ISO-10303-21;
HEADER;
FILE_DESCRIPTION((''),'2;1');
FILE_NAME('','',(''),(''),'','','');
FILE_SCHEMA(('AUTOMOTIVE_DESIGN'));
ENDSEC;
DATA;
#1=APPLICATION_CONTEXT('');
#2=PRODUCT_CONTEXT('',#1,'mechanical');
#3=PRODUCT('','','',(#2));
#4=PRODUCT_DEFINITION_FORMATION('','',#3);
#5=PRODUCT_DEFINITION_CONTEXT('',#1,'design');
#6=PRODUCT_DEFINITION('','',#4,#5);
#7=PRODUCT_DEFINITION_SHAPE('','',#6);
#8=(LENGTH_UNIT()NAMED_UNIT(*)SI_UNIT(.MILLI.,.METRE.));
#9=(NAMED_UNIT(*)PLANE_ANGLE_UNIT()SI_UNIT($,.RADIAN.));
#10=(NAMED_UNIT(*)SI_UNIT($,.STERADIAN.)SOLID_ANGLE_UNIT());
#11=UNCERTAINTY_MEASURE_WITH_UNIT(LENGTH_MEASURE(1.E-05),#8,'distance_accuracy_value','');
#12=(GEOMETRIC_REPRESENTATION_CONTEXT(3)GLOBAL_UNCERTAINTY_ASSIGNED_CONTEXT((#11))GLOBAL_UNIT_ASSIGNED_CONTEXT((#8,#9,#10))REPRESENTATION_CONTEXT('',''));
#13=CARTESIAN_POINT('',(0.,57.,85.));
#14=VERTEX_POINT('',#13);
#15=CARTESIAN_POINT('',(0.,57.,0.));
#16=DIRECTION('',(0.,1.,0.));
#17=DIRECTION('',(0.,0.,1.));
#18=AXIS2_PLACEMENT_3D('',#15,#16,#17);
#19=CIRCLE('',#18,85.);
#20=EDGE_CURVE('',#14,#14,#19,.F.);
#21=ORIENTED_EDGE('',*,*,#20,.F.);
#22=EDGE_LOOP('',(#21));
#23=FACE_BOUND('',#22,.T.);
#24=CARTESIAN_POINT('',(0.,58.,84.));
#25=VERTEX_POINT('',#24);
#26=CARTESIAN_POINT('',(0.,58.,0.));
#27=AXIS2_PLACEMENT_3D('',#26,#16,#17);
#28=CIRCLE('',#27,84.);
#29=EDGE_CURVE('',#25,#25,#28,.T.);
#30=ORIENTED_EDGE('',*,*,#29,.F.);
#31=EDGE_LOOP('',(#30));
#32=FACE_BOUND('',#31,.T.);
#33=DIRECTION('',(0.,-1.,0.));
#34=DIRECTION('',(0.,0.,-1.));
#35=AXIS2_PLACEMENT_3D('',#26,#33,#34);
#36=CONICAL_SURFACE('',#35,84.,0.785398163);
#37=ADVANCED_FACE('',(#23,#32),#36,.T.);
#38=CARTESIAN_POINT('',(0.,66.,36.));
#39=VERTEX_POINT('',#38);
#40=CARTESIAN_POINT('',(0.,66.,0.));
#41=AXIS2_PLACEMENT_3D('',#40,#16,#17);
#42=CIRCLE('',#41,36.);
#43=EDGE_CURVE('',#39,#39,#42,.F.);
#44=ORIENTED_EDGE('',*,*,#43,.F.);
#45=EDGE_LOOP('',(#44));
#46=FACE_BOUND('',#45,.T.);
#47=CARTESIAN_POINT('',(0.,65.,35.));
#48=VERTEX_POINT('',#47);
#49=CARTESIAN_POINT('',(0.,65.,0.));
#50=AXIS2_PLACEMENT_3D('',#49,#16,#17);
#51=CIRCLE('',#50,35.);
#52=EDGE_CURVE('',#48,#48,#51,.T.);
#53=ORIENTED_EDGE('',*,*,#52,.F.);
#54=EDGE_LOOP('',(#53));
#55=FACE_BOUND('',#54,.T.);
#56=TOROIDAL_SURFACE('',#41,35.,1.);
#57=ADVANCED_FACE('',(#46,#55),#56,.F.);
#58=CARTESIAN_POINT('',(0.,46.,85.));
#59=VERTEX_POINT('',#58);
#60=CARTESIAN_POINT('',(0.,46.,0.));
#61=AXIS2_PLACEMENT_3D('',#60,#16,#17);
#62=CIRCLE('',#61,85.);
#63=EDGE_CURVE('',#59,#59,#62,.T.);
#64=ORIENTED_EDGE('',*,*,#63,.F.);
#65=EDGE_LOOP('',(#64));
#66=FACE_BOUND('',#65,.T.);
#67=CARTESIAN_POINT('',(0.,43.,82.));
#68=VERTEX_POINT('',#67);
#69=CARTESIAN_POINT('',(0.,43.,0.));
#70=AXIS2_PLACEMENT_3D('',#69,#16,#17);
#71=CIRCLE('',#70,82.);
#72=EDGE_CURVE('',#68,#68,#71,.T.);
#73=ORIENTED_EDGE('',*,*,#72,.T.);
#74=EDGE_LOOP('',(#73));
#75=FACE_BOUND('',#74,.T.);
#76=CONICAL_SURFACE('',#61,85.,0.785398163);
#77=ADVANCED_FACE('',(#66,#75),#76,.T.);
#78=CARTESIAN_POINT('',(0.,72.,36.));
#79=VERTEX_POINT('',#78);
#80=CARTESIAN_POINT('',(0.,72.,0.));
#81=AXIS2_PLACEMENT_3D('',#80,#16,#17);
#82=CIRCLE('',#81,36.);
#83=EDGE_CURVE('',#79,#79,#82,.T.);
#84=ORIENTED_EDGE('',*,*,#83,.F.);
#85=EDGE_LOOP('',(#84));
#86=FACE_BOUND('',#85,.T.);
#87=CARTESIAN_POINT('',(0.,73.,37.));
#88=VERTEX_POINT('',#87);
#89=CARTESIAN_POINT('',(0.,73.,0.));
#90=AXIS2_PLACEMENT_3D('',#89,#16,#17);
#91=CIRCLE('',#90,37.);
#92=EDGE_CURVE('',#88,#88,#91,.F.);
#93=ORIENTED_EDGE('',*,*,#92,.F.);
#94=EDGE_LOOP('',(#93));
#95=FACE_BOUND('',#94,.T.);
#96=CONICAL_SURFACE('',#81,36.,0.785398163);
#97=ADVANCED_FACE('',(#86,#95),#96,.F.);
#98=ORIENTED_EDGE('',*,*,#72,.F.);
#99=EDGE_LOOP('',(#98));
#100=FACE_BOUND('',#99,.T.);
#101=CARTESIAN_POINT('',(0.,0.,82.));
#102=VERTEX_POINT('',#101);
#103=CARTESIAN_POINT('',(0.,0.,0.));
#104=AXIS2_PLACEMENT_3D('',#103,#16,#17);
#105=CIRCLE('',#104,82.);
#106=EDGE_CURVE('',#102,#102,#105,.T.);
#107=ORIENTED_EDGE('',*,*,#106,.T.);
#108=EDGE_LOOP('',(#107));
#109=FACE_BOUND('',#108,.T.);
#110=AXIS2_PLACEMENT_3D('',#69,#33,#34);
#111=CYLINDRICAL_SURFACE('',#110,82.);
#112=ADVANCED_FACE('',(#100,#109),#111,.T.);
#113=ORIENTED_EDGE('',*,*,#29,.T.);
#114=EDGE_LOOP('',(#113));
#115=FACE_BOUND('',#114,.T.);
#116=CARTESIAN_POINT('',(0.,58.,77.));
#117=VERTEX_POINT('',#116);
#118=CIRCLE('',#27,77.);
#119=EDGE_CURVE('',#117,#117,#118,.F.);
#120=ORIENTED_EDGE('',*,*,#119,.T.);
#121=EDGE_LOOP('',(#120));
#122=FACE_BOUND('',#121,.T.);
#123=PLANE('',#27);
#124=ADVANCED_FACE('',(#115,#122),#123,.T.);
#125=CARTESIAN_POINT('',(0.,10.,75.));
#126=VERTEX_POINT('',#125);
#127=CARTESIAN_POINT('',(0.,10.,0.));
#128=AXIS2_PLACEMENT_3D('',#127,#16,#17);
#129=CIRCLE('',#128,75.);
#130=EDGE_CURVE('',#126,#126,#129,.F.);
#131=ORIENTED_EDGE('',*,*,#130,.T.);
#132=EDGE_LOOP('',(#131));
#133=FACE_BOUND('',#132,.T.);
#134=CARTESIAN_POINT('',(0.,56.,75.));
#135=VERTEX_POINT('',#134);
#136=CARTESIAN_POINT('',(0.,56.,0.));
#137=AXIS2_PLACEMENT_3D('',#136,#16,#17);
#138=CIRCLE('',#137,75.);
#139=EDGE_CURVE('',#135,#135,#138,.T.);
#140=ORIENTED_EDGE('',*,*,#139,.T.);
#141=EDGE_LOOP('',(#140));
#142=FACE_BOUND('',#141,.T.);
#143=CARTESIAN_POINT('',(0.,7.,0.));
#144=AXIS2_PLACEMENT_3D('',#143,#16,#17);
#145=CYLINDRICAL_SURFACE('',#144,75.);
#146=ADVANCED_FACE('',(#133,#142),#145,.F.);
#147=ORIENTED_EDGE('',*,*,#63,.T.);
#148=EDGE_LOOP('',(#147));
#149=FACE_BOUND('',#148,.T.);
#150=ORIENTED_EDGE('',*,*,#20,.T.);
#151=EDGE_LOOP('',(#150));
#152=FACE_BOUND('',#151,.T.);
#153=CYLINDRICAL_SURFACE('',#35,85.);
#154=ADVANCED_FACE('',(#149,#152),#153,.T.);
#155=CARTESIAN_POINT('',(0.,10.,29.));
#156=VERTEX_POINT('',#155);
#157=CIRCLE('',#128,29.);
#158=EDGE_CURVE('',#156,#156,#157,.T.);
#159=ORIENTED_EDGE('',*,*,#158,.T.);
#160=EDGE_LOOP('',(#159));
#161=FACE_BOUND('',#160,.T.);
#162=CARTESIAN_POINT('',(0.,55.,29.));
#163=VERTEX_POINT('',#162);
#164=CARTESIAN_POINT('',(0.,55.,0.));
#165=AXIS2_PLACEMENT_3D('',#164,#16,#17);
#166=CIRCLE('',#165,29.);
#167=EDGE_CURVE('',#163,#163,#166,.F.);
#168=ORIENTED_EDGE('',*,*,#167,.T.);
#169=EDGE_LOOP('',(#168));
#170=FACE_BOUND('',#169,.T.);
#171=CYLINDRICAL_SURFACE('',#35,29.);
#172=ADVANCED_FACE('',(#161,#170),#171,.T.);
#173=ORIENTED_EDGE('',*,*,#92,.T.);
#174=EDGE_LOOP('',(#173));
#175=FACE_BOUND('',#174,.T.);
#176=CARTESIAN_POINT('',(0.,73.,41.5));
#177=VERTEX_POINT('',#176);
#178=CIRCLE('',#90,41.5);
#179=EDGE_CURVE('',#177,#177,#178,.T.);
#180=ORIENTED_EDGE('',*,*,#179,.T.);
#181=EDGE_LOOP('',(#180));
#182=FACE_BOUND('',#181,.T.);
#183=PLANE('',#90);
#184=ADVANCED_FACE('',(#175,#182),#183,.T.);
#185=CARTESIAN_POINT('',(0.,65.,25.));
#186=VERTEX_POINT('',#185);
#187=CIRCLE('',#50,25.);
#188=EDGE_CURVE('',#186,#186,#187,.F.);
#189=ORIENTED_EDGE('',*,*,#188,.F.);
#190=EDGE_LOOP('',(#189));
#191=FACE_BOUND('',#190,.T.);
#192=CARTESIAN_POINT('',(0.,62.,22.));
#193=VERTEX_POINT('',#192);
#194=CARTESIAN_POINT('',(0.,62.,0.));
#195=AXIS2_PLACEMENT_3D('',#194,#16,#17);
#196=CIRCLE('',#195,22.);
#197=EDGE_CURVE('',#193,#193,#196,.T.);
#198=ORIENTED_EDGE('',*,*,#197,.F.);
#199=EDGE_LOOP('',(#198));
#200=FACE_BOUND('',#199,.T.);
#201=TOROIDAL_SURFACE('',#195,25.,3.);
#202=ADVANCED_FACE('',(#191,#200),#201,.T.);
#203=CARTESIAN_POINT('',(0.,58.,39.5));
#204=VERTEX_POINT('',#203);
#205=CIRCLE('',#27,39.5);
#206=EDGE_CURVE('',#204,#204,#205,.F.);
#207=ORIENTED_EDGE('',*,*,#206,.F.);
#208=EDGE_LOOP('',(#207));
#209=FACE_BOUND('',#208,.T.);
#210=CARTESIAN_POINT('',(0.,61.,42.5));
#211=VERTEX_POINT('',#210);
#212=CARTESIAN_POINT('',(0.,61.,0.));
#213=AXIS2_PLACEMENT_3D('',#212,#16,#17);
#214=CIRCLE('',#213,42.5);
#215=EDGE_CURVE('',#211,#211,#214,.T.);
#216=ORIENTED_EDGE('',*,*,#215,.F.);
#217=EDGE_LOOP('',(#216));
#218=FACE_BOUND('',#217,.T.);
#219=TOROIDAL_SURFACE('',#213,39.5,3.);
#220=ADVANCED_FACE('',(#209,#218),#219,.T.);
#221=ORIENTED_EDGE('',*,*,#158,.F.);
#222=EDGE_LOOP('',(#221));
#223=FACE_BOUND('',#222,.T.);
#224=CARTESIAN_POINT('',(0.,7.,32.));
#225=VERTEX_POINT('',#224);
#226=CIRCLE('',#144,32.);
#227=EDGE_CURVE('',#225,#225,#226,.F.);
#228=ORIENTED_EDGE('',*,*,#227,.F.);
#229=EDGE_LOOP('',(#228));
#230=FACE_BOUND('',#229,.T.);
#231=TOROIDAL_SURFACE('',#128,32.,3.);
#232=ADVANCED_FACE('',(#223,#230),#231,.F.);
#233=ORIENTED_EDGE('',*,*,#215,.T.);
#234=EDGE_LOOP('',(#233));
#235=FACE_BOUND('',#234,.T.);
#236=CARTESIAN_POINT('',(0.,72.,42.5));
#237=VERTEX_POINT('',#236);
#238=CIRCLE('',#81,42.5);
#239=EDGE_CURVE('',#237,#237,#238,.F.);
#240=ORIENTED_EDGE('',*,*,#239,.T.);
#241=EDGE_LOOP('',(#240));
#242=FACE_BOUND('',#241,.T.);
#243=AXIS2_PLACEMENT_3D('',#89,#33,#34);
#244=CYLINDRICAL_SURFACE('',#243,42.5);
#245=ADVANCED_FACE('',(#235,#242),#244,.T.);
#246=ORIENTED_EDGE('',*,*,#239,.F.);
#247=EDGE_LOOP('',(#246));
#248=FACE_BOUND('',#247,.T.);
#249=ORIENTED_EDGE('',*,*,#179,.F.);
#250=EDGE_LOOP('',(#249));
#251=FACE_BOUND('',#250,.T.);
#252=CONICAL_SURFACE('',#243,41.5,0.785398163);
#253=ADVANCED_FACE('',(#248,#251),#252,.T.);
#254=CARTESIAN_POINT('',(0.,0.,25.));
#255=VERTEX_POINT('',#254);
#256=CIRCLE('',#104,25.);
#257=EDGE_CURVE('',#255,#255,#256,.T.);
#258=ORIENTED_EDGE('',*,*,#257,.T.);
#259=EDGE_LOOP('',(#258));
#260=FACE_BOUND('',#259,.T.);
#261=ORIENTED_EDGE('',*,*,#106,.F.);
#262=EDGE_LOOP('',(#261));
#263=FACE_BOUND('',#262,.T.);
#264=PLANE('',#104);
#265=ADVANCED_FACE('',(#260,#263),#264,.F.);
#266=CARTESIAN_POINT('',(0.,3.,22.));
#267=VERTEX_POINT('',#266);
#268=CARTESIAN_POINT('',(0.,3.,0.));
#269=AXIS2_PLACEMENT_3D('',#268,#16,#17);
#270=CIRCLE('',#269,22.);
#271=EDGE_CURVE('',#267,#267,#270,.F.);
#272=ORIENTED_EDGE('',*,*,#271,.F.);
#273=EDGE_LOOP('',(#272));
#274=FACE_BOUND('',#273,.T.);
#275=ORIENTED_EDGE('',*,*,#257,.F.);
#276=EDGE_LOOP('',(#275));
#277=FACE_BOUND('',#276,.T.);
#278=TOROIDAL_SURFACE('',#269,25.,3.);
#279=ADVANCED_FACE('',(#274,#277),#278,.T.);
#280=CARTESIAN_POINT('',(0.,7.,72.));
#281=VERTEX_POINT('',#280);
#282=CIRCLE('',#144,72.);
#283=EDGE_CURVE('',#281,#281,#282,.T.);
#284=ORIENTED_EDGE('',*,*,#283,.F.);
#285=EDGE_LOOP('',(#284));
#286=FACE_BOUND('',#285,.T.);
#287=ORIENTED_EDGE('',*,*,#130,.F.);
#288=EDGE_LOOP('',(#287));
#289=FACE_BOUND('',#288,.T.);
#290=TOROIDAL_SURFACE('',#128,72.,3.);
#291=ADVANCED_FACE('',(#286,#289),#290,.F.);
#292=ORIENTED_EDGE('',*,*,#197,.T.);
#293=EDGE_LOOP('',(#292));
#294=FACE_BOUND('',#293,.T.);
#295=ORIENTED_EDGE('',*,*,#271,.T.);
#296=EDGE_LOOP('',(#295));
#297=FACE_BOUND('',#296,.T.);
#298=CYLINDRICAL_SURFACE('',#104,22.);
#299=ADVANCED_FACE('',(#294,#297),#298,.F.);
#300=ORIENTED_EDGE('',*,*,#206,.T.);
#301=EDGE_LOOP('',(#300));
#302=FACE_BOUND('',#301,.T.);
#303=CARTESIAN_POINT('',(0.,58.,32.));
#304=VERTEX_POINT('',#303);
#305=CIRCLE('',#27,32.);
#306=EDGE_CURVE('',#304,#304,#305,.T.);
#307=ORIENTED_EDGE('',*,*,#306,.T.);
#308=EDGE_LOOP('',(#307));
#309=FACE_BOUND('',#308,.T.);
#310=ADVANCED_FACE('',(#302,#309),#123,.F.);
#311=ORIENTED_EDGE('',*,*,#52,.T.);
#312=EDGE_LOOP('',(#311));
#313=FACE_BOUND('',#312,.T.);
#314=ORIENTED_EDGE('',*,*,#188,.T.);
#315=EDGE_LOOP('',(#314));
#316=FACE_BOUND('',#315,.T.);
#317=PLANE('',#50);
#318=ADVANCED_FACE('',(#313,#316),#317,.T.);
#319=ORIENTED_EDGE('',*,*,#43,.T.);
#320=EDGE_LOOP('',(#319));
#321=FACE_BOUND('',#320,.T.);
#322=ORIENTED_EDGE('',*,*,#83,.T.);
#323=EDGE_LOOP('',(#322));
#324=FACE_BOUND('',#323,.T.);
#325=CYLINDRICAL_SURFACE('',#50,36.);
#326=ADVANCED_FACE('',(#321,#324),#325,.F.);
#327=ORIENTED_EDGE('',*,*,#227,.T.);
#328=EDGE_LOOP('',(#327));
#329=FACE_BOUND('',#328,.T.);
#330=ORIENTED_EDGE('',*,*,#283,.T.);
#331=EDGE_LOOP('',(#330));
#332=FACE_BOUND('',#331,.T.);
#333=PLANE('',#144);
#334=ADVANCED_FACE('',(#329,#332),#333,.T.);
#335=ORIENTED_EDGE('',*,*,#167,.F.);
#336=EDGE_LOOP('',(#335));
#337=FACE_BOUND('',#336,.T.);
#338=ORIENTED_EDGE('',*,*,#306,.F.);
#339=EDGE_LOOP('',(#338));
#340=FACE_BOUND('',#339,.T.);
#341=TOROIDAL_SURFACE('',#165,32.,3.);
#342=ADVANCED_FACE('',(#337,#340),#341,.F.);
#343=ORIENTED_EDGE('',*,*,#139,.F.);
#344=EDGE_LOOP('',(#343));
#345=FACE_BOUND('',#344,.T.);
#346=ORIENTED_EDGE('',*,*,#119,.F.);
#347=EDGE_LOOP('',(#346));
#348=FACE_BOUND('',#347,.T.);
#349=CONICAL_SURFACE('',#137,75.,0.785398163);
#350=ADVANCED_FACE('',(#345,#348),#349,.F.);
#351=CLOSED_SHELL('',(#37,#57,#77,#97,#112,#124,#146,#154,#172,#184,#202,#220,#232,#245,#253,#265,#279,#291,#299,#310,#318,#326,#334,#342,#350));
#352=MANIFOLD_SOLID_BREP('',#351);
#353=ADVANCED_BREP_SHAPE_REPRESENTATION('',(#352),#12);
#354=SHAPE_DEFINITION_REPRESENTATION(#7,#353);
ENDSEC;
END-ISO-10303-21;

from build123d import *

# Parameters (mm, degrees)
SKETCH2_R           = 82
BOSS_EXTRUDE1_DEPTH = 43
SKETCH3_R           = 85
BOSS_EXTRUDE2_DEPTH = 15
SKETCH4_R           = 75
CUT_EXTRUDE1_DEPTH  = 51
SKETCH5_R           = 29
BOSS_EXTRUDE3_DEPTH = 51
SKETCH6_R           = 42.5
BOSS_EXTRUDE4_DEPTH = 15
SKETCH7_R           = 36
CUT_EXTRUDE6_DEPTH  = 8
SKETCH7_5_R         = 22
CUT_EXTRUDE7_DEPTH  = 141.637832748
CHAMFER1_SIZE       = 1
CHAMFER2_SIZE       = 2
FILLET1_R           = 3
CHAMFER3_SIZE       = 3
FILLET2_R           = 1


with BuildPart() as part:
    # Sketch2 → Boss-Extrude1 (new body)
    with BuildSketch(Plane(origin=(0, 0, 0), x_dir=(1, 0, 0), z_dir=(0, 1, 0))):
        with Locations(Location((0, 0, 0), (0, 0, 270))):
            Circle(SKETCH2_R)
    extrude(amount=BOSS_EXTRUDE1_DEPTH)

    # Sketch3 → Boss-Extrude2 (add)
    with BuildSketch(Plane(origin=(0, 43, 0), x_dir=(1, 0, 0), z_dir=(0, 1, 0))):
        with Locations(Location((0, 0, 0), (0, 0, 270))):
            Circle(SKETCH3_R)
    extrude(amount=BOSS_EXTRUDE2_DEPTH)

    # Sketch4 → Cut-Extrude1 (cut)
    with BuildSketch(Plane(origin=(0, 58, 0), x_dir=(1, 0, 0), z_dir=(0, 1, 0))):
        with Locations(Location((0, 0, 0), (0, 0, 270))):
            Circle(SKETCH4_R)
    extrude(amount=-CUT_EXTRUDE1_DEPTH, mode=Mode.SUBTRACT)

    # Sketch5 → Boss-Extrude3 (add)
    with BuildSketch(Plane(origin=(0, 7, 0), x_dir=(1, 0, 0), z_dir=(0, 1, 0))):
        with Locations(Location((0, 0, 0), (0, 0, 270))):
            Circle(SKETCH5_R)
    extrude(amount=BOSS_EXTRUDE3_DEPTH)

    # Sketch6 → Boss-Extrude4 (add)
    with BuildSketch(Plane(origin=(0, 58, 0), x_dir=(1, 0, 0), z_dir=(0, 1, 0))):
        with Locations(Location((0, 0, 0), (0, 0, 270))):
            Circle(SKETCH6_R)
    extrude(amount=BOSS_EXTRUDE4_DEPTH)

    # Sketch7 → Cut-Extrude6 (cut)
    with BuildSketch(Plane(origin=(0, 73, 0), x_dir=(1, 0, 0), z_dir=(0, 1, 0))):
        with Locations(Location((0, 0, 0), (0, 0, 270))):
            Circle(SKETCH7_R)
    extrude(amount=-CUT_EXTRUDE6_DEPTH, mode=Mode.SUBTRACT)

    # Sketch7<5> → Cut-Extrude7 (cut, through all)
    with BuildSketch(Plane(origin=(0, 73, 0), x_dir=(1, 0, 0), z_dir=(0, 1, 0))):
        with Locations(Location((0, 0, 0), (0, 0, 270))):
            Circle(SKETCH7_5_R)
    extrude(amount=-CUT_EXTRUDE7_DEPTH, mode=Mode.SUBTRACT)

    # Chamfer1
    chamfer1_edges = [part.edges().sort_by_distance(p)[0] for p in [
        (0, 73, -42.5),
        (0, 73, -36),
        (0, 58, -85),
    ]]
    chamfer(chamfer1_edges, length=CHAMFER1_SIZE)

    # Chamfer2
    chamfer2_edges = [part.edges().sort_by_distance(p)[0] for p in [
        (0, 58, -75),
    ]]
    chamfer(chamfer2_edges, length=CHAMFER2_SIZE)

    # Fillet1
    fillet1_edges = [part.edges().sort_by_distance(p)[0] for p in [
        (0, 7, -75),
        (0, 7, -29),
        (0, 58, -29),
        (0, 58, -42.5),
        (0, 65, -22),
        (0, 0, -22),
    ]]
    fillet(fillet1_edges, radius=FILLET1_R)

    # Chamfer3
    chamfer3_edges = [part.edges().sort_by_distance(p)[0] for p in [
        (0, 43, -85),
    ]]
    chamfer(chamfer3_edges, length=CHAMFER3_SIZE - 0.0001)  # a hair under: the kernel refuses the full size

    # Fillet2
    fillet2_edges = [part.edges().sort_by_distance(p)[0] for p in [
        (0, 65, -36),
    ]]
    fillet(fillet2_edges, radius=FILLET2_R)


solid = part.part
